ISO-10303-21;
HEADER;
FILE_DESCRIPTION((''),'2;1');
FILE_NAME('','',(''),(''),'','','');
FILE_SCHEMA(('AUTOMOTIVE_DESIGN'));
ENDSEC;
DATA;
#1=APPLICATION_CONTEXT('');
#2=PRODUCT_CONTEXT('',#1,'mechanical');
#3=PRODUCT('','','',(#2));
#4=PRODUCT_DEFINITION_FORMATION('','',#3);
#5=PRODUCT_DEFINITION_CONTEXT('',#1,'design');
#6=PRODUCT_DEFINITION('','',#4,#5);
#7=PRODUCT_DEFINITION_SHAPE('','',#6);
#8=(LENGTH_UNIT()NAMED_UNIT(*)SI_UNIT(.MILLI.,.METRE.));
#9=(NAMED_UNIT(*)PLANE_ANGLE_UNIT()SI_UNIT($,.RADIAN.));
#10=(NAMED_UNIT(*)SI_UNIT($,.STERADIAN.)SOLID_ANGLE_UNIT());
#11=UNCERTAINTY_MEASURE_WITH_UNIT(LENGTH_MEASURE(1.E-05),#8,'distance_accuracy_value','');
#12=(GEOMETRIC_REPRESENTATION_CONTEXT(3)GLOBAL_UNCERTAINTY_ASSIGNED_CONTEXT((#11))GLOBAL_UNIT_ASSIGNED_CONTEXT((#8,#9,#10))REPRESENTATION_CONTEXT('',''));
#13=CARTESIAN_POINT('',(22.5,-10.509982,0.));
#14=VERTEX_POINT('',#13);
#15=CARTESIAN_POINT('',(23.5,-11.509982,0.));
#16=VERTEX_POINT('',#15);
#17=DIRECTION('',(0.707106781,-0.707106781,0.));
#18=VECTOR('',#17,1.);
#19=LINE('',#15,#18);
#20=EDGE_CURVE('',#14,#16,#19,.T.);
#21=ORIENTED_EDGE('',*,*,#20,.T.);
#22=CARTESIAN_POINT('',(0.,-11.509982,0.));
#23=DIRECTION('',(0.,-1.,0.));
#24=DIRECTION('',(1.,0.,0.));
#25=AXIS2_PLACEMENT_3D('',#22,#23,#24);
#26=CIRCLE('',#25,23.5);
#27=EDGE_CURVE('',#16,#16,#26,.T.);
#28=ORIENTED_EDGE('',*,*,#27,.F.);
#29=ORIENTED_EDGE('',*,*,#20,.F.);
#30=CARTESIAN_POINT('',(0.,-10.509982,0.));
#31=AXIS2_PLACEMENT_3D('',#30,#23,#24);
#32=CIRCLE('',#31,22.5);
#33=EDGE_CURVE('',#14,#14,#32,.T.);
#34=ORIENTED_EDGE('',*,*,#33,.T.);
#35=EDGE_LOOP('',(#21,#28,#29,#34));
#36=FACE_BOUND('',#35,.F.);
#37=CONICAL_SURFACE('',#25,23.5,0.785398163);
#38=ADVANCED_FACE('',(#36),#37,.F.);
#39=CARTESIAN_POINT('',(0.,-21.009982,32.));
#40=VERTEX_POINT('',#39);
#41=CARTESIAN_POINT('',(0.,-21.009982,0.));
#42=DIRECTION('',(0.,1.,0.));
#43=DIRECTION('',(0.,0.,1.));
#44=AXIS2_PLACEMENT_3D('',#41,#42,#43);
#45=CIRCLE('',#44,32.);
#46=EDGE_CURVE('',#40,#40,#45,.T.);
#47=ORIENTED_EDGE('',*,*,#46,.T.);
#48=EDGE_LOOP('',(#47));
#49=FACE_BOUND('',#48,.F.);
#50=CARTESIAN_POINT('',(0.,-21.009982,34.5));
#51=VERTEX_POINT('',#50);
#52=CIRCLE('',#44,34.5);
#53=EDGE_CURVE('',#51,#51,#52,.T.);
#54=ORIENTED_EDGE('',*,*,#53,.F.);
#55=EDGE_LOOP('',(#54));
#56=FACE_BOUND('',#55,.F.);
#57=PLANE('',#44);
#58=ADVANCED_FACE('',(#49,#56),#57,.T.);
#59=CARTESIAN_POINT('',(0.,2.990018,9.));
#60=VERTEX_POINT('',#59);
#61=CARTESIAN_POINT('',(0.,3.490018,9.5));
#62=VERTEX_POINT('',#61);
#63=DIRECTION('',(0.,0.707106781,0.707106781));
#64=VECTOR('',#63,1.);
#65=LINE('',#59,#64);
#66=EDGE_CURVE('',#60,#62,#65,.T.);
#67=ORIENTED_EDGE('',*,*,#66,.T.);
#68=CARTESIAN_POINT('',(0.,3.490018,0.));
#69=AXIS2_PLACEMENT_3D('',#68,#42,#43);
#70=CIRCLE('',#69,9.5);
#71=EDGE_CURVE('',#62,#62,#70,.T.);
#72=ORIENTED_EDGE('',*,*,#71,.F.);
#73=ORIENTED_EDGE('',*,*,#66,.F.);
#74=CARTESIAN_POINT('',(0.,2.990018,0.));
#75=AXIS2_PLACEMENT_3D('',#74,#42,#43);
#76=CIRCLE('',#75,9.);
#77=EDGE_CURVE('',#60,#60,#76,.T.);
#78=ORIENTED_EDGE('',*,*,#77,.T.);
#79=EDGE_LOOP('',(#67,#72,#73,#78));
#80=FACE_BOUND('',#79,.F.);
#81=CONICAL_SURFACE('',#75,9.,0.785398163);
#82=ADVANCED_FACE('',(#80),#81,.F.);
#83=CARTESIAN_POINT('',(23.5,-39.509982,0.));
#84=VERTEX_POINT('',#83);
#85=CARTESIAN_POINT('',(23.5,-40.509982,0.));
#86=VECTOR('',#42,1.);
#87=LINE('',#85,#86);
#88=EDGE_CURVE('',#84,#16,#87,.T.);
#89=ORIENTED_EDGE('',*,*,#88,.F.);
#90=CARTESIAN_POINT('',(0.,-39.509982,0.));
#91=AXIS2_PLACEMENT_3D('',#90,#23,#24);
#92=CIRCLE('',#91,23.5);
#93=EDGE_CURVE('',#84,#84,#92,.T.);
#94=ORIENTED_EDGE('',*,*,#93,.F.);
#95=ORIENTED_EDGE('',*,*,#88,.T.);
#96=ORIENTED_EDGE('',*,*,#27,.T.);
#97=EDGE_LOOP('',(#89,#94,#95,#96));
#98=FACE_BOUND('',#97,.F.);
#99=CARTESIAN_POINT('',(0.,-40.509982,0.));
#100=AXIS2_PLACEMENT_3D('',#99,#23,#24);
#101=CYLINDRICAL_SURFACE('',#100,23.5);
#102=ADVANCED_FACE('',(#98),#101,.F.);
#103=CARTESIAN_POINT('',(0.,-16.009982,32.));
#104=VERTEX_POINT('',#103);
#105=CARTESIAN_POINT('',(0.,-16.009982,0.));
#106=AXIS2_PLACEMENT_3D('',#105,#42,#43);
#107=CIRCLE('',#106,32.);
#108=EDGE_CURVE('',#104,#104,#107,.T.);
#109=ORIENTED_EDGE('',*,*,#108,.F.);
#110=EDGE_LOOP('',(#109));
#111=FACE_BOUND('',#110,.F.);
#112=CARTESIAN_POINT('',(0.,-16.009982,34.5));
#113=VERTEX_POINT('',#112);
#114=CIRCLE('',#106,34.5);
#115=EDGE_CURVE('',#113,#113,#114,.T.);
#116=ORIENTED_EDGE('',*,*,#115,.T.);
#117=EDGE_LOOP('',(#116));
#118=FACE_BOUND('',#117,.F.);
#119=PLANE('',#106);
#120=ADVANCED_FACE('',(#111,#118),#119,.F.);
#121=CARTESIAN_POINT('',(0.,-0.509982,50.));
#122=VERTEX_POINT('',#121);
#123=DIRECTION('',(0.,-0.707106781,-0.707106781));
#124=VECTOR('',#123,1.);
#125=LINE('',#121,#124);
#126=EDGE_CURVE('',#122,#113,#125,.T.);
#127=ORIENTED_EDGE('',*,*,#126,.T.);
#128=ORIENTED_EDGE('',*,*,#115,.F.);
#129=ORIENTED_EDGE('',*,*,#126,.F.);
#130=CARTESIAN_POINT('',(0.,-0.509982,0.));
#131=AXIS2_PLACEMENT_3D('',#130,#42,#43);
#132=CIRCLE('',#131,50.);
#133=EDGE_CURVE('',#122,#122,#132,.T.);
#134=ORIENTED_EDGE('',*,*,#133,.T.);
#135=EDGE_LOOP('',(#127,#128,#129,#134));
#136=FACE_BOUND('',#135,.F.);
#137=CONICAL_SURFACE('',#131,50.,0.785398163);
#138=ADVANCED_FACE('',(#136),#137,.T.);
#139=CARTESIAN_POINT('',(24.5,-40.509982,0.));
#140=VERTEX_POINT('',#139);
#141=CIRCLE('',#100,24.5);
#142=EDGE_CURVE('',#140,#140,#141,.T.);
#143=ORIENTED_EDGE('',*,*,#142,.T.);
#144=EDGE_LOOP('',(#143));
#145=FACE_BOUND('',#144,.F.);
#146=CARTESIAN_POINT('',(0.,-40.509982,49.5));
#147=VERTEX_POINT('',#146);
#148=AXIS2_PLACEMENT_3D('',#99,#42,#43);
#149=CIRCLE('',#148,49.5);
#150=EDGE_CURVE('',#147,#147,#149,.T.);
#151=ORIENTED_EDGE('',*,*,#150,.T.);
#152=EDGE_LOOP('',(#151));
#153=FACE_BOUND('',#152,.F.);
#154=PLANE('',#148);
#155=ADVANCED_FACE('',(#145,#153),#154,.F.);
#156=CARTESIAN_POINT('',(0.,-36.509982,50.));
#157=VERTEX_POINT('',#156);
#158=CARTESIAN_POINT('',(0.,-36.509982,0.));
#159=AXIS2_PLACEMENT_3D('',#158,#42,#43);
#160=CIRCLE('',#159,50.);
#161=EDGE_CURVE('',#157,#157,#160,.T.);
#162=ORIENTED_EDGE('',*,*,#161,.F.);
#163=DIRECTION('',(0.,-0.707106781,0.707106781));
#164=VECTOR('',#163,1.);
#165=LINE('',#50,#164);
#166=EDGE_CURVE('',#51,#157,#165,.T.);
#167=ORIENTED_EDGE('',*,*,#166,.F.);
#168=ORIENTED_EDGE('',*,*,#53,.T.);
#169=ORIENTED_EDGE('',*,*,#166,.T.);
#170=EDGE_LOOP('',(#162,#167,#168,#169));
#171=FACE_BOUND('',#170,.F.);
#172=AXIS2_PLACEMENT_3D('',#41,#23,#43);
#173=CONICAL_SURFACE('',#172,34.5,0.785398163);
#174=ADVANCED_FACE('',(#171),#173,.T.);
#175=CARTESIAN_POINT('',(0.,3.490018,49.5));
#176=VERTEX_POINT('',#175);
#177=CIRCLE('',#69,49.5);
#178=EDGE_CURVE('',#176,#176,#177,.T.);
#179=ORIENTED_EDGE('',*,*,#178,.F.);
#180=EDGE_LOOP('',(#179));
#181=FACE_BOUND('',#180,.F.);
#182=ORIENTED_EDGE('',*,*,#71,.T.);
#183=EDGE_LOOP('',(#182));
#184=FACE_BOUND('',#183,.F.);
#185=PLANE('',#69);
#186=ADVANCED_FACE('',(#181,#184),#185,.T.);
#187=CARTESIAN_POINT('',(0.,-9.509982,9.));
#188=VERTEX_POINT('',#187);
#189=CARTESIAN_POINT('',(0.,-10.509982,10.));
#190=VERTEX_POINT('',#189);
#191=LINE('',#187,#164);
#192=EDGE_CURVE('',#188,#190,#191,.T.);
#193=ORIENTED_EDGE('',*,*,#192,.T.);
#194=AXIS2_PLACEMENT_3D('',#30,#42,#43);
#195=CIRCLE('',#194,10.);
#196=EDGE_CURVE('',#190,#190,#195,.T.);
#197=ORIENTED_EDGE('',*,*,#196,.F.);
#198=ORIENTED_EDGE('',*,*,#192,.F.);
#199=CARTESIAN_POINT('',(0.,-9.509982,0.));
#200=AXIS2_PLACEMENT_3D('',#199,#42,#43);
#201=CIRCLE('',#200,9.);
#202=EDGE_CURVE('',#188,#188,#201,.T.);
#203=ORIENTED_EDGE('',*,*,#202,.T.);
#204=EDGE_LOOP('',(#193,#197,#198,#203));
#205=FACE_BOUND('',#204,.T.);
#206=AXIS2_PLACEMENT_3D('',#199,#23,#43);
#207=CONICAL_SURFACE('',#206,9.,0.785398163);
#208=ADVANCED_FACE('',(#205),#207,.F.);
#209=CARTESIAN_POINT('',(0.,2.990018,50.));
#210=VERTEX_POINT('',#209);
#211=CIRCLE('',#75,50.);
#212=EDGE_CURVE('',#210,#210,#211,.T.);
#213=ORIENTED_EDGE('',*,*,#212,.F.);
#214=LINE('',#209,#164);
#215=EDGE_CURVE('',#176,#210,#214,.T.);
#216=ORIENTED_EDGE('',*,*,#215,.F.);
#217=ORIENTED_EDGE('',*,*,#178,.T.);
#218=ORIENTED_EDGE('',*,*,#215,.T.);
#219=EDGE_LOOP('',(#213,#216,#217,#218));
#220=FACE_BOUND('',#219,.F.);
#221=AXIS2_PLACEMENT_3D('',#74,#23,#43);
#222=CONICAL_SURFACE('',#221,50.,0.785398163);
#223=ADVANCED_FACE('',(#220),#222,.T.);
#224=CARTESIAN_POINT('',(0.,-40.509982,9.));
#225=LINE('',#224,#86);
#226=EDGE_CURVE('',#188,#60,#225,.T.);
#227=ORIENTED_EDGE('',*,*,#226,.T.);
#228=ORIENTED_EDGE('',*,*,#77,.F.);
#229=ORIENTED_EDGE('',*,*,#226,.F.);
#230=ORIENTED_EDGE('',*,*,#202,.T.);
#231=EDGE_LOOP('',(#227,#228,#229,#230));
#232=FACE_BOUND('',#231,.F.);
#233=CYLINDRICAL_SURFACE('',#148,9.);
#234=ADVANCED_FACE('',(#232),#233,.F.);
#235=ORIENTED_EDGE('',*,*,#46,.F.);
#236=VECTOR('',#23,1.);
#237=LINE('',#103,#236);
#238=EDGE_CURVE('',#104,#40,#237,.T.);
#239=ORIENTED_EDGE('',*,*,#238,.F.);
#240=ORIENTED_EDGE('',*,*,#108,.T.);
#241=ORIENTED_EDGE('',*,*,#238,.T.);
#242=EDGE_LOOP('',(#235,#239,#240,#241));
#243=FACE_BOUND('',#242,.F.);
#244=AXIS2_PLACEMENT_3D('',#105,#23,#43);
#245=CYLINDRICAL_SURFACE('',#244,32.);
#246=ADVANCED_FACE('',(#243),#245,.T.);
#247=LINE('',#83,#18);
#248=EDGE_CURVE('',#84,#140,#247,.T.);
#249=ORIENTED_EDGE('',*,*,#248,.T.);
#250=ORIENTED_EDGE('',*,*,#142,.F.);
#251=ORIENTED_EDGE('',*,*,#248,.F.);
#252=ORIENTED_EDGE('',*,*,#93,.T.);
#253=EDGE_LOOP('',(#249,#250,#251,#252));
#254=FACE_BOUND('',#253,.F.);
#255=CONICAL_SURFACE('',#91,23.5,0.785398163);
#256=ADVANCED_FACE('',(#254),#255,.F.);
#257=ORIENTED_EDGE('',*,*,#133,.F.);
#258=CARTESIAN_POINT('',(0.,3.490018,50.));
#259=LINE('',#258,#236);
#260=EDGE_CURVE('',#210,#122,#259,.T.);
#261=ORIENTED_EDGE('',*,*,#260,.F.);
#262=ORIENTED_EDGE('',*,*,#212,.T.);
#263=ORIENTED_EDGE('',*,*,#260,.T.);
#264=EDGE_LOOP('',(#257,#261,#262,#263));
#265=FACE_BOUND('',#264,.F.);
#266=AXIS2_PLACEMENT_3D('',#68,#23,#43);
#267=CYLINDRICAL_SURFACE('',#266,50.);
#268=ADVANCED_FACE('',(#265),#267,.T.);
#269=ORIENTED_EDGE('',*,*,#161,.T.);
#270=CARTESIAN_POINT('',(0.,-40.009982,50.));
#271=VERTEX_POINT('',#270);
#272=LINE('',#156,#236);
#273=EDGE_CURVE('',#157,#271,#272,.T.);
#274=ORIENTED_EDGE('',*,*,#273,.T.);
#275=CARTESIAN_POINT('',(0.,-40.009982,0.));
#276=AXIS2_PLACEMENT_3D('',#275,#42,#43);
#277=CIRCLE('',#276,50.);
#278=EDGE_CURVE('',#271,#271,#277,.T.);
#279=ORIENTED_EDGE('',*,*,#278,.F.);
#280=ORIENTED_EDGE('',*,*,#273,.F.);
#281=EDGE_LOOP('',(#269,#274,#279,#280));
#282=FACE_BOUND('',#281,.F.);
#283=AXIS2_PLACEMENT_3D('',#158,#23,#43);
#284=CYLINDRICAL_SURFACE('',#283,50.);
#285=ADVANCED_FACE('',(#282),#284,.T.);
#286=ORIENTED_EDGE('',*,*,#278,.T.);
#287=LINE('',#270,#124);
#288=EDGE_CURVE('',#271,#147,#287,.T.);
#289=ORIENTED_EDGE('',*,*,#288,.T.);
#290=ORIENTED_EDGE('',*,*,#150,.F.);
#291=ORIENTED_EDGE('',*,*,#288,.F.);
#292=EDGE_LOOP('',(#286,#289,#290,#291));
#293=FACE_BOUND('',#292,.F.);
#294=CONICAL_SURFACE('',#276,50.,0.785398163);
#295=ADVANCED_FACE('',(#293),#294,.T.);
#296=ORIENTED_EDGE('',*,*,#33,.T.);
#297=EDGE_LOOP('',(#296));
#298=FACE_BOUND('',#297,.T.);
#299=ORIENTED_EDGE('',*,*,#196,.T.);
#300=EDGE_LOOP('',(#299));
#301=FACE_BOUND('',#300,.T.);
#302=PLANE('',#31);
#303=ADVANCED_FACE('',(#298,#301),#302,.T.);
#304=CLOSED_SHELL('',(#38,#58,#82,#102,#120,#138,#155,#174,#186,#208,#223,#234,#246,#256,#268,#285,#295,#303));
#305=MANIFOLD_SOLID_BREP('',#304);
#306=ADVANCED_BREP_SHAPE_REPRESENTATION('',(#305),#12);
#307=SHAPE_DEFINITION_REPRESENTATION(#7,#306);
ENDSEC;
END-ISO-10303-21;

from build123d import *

# Parameters (mm, degrees)
F2_SIZE  = 0.5
F3_R     = 23.5
F4_DEPTH = 30
F5_SIZE  = 1


with BuildPart() as f1:
    # F0 (on Right) → F1 (revolve)
    with BuildSketch(Plane.YZ):
        Polygon((-40.5099816322, 9), (3.4900183678, 9), (3.4900183678, 50), (-0.5099816322, 50), (-16.0099816322, 34.5), (-16.0099816322, 32), (-21.0099816322, 32), (-21.0099816322, 34.5), (-36.5099816322, 50), (-40.5099816322, 50), align=None)
    revolve(axis=Axis((0, -20.3511445433, 0), (0, 1, 0)))

    # F2
    f2_edges = [f1.edges().sort_by_distance(p)[0] for p in [
        (0, -40.509982, -9),
        (0, -40.509982, -50),
        (0, 3.490018, -50),
        (0, 3.490018, -9),
    ]]
    chamfer(f2_edges, length=F2_SIZE)

    # F3 (on face) → F4 (cut)
    with BuildSketch(Plane.XZ.offset(40.5099816322)):
        Circle(F3_R)
    extrude(amount=-F4_DEPTH, mode=Mode.SUBTRACT)

    # F5
    f5_edges = [f1.edges().sort_by_distance(p)[0] for p in [
        (-23.5, -40.509982, 0),
        (0, -10.509982, -9),
        (-23.5, -10.509982, 0),
    ]]
    chamfer(f5_edges, length=F5_SIZE)


solid = f1.part
